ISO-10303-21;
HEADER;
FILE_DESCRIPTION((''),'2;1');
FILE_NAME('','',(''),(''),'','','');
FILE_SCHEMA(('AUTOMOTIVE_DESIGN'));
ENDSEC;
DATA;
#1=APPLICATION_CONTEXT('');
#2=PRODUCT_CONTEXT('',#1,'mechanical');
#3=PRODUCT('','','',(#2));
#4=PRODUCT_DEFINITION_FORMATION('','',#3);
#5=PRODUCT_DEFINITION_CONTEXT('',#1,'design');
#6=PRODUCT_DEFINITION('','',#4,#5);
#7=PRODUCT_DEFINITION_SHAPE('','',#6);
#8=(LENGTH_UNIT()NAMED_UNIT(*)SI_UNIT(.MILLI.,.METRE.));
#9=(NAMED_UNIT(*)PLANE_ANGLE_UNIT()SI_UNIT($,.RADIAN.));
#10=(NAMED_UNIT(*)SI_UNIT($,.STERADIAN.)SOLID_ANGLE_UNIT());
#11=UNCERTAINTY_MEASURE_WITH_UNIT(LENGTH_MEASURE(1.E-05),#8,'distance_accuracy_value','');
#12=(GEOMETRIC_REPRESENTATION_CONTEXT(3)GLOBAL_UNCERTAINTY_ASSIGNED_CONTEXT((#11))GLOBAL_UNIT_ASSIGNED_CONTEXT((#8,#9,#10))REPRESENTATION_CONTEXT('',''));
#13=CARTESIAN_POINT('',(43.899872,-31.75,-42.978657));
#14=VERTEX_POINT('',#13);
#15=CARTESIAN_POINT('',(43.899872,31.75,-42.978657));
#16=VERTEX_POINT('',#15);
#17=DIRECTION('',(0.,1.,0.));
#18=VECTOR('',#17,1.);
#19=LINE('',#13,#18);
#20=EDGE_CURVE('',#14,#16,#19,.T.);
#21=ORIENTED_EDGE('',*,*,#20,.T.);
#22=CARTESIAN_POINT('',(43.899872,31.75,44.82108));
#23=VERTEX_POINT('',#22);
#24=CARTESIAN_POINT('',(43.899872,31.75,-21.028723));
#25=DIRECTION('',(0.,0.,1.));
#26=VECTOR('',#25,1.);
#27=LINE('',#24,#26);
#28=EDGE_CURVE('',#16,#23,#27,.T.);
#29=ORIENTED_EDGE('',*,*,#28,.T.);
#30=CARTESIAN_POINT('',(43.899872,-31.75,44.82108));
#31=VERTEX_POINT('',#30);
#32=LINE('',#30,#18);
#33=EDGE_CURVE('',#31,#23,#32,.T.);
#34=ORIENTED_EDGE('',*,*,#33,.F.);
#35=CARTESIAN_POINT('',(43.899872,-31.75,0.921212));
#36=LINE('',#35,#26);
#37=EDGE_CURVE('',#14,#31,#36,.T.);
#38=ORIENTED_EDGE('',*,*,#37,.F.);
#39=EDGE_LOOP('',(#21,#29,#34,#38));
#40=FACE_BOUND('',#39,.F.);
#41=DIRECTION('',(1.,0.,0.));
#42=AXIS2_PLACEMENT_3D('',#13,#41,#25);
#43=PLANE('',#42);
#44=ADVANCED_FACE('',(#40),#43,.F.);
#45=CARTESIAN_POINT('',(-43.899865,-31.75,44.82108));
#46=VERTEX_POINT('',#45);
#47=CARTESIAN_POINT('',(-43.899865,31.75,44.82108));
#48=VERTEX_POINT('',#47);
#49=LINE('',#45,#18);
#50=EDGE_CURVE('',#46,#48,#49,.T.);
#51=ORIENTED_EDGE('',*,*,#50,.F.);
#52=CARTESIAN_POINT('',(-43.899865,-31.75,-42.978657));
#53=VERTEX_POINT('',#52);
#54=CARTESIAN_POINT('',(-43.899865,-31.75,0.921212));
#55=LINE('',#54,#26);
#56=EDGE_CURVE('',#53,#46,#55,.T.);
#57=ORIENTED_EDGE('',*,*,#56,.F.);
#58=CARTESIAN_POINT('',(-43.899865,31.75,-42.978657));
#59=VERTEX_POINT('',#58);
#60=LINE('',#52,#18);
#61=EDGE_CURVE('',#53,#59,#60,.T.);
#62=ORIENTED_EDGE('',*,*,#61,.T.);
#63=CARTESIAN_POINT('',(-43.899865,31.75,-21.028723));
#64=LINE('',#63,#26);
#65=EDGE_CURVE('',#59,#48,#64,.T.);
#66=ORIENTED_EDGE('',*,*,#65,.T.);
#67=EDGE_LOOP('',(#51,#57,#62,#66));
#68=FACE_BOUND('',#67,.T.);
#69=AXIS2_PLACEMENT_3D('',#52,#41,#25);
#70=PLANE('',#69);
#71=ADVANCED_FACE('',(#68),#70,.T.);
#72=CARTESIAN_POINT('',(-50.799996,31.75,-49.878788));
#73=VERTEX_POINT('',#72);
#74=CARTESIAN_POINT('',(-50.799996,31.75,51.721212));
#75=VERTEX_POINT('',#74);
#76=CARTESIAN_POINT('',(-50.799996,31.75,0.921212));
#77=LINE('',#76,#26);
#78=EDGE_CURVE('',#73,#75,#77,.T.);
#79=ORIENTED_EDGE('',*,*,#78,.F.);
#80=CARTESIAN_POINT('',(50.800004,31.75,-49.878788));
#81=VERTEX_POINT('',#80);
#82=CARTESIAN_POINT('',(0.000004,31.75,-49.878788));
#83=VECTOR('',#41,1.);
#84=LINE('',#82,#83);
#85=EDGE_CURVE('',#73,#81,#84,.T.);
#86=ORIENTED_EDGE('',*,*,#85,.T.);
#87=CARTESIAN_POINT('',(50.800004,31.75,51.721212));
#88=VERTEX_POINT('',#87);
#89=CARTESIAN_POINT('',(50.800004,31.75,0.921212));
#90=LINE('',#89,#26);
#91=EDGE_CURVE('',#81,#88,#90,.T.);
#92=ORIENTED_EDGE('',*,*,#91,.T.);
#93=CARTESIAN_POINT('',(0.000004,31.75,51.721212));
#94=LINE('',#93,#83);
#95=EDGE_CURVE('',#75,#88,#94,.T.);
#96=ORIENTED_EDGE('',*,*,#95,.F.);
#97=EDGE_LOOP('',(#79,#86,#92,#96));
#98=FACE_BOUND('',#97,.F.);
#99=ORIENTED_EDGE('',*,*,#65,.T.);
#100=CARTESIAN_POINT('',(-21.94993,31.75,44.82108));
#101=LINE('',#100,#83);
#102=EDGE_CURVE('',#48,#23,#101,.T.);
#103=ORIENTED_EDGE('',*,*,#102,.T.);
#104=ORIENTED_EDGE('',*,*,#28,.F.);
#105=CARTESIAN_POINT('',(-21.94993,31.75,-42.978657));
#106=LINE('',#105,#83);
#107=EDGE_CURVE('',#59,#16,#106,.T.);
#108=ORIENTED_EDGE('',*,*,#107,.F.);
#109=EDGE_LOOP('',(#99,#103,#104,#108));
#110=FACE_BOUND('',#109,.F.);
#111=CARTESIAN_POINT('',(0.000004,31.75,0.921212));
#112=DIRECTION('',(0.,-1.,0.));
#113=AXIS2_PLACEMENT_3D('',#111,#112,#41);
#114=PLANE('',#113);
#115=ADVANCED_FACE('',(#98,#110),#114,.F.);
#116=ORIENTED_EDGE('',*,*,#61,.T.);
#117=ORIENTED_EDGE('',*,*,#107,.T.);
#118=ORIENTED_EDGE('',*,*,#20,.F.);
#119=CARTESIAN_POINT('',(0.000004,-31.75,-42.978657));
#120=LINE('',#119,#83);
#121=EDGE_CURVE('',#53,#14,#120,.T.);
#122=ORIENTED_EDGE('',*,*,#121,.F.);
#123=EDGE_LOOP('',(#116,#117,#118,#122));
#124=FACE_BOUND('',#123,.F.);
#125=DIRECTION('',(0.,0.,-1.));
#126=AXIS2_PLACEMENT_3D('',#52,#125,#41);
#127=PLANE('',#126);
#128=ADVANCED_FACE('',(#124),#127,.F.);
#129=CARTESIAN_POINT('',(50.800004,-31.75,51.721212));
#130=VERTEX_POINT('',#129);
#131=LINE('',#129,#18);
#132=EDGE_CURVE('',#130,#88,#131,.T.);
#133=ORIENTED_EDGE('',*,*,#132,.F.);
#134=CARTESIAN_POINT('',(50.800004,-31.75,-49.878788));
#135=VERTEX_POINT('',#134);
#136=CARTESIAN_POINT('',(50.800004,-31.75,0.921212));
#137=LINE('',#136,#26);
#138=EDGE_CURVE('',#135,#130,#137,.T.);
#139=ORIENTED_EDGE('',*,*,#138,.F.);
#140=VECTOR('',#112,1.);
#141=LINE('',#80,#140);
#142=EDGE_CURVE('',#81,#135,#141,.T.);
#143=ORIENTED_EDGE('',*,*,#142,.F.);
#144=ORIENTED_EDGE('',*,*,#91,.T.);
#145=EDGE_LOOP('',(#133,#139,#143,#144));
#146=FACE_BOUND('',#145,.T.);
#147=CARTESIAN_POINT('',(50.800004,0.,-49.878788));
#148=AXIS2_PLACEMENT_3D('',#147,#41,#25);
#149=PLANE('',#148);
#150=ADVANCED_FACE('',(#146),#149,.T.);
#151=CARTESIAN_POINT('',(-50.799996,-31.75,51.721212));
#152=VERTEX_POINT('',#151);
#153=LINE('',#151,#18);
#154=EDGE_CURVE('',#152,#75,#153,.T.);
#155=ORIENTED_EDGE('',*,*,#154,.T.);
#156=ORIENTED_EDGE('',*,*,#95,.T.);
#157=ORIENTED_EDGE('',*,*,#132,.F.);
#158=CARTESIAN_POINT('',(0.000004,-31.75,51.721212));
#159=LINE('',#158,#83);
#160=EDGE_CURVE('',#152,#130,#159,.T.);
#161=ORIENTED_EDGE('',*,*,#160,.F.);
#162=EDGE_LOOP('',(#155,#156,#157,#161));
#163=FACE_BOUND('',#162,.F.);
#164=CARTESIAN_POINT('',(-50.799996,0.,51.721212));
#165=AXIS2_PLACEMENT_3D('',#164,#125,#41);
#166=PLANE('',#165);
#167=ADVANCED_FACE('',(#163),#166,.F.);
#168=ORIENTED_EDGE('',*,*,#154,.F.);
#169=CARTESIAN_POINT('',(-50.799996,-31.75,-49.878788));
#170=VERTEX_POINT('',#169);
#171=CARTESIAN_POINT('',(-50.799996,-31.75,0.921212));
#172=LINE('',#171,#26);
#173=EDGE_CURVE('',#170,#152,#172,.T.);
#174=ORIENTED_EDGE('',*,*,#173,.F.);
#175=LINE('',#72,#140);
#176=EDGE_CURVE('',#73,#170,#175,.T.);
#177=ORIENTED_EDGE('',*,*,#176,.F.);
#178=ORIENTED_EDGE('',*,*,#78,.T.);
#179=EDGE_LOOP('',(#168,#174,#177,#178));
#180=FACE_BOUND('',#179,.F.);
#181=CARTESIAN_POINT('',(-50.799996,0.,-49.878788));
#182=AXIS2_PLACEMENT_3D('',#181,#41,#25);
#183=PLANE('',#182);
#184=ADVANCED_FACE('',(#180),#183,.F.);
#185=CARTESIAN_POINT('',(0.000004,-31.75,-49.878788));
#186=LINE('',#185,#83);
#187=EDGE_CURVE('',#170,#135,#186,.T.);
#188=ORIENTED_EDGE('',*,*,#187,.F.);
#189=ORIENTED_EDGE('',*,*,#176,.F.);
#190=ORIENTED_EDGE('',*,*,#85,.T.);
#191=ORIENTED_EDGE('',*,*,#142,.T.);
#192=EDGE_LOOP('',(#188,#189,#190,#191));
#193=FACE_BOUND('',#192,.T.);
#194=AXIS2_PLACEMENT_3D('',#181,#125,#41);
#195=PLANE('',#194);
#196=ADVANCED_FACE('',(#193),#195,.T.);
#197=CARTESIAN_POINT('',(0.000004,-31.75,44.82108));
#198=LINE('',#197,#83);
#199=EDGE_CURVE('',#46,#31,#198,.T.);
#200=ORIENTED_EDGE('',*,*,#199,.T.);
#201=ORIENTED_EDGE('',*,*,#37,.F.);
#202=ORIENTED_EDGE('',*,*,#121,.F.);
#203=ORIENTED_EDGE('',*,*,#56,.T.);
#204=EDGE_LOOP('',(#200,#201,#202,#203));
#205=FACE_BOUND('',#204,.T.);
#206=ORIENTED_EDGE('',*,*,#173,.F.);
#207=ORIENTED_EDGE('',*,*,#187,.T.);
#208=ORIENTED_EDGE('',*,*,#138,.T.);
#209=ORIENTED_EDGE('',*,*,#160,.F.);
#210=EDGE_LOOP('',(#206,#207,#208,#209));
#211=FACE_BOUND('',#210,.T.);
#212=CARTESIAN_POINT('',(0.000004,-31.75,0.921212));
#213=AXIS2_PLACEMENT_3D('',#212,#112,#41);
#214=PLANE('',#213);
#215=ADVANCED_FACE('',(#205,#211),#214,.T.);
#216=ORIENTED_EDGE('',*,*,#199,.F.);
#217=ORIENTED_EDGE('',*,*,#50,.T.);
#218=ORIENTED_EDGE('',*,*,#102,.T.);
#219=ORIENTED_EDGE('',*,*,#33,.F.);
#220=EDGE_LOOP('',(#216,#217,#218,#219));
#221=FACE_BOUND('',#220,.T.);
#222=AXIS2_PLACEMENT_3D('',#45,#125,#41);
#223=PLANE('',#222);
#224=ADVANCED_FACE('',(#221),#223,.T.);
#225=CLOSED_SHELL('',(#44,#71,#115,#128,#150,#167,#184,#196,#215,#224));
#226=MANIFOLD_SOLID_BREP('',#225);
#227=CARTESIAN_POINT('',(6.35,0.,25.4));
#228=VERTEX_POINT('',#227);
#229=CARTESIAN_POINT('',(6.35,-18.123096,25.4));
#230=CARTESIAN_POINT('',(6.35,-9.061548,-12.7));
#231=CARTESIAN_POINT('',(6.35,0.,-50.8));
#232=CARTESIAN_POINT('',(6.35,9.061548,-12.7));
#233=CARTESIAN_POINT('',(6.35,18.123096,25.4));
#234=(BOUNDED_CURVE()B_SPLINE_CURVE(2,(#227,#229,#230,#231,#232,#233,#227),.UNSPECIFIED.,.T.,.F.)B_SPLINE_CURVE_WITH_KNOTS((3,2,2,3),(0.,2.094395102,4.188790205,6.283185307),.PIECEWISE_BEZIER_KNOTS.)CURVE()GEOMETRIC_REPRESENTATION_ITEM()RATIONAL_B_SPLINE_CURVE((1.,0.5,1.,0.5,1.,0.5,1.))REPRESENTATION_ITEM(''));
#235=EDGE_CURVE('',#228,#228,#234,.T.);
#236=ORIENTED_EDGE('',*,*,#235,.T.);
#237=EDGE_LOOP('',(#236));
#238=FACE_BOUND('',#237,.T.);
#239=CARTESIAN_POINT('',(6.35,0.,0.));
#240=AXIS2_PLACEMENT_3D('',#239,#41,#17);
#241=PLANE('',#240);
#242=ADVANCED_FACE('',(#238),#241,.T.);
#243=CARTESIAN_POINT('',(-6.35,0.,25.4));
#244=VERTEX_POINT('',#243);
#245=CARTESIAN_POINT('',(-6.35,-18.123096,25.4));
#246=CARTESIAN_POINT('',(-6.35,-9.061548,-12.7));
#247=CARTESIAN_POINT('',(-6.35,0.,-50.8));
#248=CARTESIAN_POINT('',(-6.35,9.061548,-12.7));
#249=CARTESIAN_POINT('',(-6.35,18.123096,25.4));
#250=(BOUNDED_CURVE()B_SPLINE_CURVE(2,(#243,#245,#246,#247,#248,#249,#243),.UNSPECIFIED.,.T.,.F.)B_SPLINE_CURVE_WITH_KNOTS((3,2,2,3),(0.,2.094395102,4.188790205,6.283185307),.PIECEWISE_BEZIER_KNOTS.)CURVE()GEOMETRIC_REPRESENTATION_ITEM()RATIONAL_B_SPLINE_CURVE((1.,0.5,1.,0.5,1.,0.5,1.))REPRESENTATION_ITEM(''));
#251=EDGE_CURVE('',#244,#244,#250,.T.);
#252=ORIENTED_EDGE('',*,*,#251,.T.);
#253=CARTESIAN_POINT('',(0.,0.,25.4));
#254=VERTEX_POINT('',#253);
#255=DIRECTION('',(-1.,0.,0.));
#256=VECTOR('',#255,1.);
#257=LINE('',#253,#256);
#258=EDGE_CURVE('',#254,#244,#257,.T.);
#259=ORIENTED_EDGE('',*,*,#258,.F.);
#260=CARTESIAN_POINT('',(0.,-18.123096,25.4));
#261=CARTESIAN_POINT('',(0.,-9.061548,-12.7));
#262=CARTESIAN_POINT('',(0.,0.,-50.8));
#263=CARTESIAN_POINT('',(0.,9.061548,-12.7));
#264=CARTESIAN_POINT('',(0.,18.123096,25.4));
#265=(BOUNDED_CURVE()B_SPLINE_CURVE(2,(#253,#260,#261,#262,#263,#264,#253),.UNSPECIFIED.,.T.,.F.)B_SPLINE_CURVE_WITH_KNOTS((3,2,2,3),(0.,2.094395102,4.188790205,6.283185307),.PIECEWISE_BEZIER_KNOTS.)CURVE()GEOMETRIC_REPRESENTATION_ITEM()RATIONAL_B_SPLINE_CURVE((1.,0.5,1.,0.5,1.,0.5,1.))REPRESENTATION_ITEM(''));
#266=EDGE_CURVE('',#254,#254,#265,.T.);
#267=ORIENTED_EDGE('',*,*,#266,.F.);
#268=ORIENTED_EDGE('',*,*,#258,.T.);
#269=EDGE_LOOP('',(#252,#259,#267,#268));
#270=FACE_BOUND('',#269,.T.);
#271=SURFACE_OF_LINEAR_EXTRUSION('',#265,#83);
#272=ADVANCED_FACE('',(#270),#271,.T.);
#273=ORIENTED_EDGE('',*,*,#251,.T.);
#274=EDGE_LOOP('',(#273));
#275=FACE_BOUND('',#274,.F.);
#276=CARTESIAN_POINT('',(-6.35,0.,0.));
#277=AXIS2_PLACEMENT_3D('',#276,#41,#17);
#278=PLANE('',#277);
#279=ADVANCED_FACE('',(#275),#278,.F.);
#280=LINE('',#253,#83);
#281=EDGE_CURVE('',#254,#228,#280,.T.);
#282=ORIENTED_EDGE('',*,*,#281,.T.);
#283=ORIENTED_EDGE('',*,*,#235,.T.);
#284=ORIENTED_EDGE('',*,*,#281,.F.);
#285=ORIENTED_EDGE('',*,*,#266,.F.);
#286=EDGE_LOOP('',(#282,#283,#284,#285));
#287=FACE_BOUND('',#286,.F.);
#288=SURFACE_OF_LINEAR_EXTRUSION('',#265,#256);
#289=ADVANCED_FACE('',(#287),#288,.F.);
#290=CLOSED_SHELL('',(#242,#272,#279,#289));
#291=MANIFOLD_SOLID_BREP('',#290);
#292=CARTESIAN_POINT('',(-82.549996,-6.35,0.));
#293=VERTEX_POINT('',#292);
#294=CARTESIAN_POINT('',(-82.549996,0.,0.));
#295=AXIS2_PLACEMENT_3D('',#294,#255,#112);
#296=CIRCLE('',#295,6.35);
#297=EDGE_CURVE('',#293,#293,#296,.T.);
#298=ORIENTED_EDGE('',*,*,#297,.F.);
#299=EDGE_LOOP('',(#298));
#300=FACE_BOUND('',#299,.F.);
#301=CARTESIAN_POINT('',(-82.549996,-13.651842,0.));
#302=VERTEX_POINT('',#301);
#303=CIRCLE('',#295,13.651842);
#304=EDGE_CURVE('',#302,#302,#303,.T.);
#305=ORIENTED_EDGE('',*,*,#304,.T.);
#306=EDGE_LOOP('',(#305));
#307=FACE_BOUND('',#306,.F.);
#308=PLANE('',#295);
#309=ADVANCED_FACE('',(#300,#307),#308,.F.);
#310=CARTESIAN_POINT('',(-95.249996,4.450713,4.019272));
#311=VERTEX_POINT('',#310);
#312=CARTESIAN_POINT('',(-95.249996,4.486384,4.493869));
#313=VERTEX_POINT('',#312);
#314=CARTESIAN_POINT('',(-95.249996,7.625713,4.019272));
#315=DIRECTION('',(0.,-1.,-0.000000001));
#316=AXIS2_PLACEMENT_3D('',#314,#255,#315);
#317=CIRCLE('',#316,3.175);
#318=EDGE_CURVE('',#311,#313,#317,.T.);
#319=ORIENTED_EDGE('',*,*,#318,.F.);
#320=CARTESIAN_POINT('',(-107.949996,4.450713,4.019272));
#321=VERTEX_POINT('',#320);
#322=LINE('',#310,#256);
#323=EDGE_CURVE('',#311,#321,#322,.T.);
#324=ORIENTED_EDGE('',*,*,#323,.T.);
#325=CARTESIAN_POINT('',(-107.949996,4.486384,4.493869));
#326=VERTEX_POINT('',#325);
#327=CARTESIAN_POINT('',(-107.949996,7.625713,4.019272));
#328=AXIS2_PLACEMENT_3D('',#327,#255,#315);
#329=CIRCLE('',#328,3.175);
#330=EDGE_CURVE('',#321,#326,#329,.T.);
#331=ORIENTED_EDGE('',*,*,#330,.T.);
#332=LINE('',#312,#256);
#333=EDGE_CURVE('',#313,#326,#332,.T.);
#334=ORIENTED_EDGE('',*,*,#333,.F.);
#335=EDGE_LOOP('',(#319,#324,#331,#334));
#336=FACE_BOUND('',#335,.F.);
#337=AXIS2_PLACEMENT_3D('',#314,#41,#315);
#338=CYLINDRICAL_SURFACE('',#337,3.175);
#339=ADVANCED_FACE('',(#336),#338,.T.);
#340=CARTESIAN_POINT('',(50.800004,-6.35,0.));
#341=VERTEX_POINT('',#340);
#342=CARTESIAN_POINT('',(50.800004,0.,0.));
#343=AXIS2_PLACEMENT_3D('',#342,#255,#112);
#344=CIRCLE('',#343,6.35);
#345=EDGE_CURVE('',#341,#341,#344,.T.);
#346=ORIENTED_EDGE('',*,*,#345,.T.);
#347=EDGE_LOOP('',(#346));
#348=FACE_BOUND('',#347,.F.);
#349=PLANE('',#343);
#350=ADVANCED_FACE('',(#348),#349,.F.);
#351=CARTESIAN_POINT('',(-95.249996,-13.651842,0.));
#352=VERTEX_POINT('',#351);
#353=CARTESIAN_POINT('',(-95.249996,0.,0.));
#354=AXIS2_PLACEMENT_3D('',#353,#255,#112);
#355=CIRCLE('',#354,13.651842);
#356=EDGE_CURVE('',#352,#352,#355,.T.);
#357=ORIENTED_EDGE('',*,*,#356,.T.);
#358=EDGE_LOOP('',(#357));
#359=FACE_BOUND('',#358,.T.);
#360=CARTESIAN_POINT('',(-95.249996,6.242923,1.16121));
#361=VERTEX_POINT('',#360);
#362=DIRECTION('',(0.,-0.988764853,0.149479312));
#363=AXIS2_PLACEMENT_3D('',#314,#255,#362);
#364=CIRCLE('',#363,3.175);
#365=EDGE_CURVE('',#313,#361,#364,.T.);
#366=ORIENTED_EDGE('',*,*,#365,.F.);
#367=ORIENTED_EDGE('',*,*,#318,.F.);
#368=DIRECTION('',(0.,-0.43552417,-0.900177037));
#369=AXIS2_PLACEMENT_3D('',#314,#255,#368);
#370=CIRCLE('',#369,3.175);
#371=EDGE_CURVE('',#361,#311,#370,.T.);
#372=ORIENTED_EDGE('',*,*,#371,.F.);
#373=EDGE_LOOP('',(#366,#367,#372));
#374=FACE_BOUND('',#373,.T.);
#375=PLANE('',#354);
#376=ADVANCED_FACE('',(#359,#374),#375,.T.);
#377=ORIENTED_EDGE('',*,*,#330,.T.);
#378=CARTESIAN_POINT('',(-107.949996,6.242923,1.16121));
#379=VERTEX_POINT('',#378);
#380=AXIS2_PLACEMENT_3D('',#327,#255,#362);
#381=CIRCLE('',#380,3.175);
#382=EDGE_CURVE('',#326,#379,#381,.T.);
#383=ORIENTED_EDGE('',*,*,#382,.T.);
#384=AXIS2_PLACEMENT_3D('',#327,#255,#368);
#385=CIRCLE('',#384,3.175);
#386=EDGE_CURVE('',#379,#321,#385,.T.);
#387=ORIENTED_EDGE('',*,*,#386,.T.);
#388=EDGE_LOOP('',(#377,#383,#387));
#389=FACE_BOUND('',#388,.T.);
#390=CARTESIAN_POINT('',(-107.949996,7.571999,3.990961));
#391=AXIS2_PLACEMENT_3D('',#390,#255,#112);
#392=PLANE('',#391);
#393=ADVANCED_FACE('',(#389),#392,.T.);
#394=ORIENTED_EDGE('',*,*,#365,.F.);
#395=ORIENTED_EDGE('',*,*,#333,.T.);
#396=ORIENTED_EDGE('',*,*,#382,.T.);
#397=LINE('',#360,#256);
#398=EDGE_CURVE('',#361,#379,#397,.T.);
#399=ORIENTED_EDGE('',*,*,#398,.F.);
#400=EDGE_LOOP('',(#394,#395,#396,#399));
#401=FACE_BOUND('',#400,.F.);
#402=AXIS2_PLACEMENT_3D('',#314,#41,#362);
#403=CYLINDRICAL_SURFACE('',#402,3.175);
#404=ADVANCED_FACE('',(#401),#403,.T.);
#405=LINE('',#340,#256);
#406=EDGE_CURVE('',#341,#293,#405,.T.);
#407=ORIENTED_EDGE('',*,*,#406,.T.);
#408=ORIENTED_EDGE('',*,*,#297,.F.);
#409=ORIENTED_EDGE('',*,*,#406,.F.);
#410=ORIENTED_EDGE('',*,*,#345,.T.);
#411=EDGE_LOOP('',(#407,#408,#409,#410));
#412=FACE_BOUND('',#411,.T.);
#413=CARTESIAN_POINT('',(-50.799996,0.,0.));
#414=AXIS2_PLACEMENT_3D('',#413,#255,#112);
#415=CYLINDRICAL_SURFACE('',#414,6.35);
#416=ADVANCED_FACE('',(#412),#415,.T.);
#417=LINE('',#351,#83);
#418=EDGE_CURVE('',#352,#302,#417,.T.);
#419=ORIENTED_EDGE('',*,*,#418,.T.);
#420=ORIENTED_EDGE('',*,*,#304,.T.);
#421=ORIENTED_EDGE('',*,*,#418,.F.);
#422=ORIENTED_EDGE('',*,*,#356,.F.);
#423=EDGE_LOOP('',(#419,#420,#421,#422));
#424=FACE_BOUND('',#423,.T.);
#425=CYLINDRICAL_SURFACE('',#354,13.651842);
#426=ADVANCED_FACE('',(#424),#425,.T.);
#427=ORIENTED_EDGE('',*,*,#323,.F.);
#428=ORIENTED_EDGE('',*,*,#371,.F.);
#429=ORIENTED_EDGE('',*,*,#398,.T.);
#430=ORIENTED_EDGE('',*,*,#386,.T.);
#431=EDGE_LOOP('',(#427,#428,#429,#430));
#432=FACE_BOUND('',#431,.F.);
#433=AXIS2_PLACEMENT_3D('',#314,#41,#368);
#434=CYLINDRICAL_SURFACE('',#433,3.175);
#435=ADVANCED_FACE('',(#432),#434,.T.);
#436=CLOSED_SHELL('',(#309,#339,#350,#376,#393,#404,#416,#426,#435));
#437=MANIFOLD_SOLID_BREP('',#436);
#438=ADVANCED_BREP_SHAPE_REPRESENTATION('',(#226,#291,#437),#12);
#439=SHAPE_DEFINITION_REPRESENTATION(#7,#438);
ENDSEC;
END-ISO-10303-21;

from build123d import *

# Parameters (mm, degrees)
F0_W          = 101.6
F0_H          = 101.6
F1_DEPTH      = 31.75
F2_W          = 87.7997364508
F2_H          = 87.7997364508
F3_DEPTH      = 101.6
F4_R          = 6.35
F5_DEPTH      = 44.45
F5_DEPTH_BACK = 101.6
F9_DEPTH      = 6.35
F11_R         = 13.6518424836
F11_R_2       = 6.35
F12_DEPTH     = 12.7
F14_DEPTH     = 12.7


# Not quite as in the source:
# - the program builds the solid bodies; features that only make, move or delete a surface that nothing else refers to are left out


with BuildPart() as f1:
    # F0 (on Front) → F1 (new body, symmetric)
    with BuildSketch(Plane.XZ):
        with Locations((3.7253e-06, 0.921211595)):
            Rectangle(F0_W, F0_H)
    extrude(amount=F1_DEPTH, both=True)

    # F2 (on face) → F3 (cut)
    with BuildSketch(Plane.XZ.offset(31.75)):
        with Locations((3.7253e-06, 0.921211595)):
            Rectangle(F2_W, F2_H)
    extrude(amount=-F3_DEPTH, mode=Mode.SUBTRACT)


with BuildPart() as f5:
    # F4 (on face) → F5 (new body, two sides)
    with BuildSketch(Plane(origin=(-50.7999962747, 0, 0), x_dir=(0, -1, 0), z_dir=(-1, 0, 0))) as f5_sk:
        Circle(F4_R)
    extrude(amount=F5_DEPTH)
    extrude(f5_sk.sketch, amount=-F5_DEPTH_BACK)

    # F11 (on face) → F12 (join)
    with BuildSketch(Plane(origin=(-95.2499962747, 0, 0), x_dir=(0, -1, 0), z_dir=(-1, 0, 0))):
        Circle(F11_R)
        Circle(F11_R_2, mode=Mode.SUBTRACT)
    extrude(amount=-F12_DEPTH)

    # F13 (on face) → F14 (join)
    with BuildSketch(Plane(origin=(-95.2499962747, 0, 0), x_dir=(0, -1, 0), z_dir=(-1, 0, 0))):
        with BuildLine():
            ThreePointArc((-6.2429233087, 1.1612099561), (-5.6174872871, 2.9607999898), (-4.486384138, 4.4938688639))
            ThreePointArc((-4.486384138, 4.4938688639), (-10.434456191, 5.4996720429), (-6.2429233087, 1.1612099561))
        make_face()
        with BuildLine():
            ThreePointArc((-6.2429233087, 1.1612099561), (-4.9358258553, 2.332519374), (-4.4507125475, 4.019272048))
            ThreePointArc((-4.4507125475, 4.019272048), (-4.4596430046, 4.257239798), (-4.486384138, 4.4938688639))
            ThreePointArc((-4.486384138, 4.4938688639), (-5.6174872871, 2.9607999898), (-6.2429233087, 1.1612099561))
        make_face()
    extrude(amount=F14_DEPTH)


with BuildPart() as f9:
    # F8 (on Right) → F9 (new body, symmetric)
    with BuildSketch(Plane.YZ):
        with BuildLine():
            add(Edge.make_bspline(
                [(0, 25.4), (-18.1230958021, 25.4), (-9.0615479011, -12.7), (0, -50.8), (9.0615479011, -12.7), (18.1230958021, 25.4), (0, 25.4)],
                knots=[0, 0, 0, 2.0943951024, 2.0943951024, 4.1887902048, 4.1887902048, 6.2831853072, 6.2831853072, 6.2831853072], degree=2, weights=[1, 0.5, 1, 0.5, 1, 0.5, 1]))
        make_face()
    extrude(amount=F9_DEPTH, both=True)


solid = Compound([f1.part, f5.part, f9.part])
